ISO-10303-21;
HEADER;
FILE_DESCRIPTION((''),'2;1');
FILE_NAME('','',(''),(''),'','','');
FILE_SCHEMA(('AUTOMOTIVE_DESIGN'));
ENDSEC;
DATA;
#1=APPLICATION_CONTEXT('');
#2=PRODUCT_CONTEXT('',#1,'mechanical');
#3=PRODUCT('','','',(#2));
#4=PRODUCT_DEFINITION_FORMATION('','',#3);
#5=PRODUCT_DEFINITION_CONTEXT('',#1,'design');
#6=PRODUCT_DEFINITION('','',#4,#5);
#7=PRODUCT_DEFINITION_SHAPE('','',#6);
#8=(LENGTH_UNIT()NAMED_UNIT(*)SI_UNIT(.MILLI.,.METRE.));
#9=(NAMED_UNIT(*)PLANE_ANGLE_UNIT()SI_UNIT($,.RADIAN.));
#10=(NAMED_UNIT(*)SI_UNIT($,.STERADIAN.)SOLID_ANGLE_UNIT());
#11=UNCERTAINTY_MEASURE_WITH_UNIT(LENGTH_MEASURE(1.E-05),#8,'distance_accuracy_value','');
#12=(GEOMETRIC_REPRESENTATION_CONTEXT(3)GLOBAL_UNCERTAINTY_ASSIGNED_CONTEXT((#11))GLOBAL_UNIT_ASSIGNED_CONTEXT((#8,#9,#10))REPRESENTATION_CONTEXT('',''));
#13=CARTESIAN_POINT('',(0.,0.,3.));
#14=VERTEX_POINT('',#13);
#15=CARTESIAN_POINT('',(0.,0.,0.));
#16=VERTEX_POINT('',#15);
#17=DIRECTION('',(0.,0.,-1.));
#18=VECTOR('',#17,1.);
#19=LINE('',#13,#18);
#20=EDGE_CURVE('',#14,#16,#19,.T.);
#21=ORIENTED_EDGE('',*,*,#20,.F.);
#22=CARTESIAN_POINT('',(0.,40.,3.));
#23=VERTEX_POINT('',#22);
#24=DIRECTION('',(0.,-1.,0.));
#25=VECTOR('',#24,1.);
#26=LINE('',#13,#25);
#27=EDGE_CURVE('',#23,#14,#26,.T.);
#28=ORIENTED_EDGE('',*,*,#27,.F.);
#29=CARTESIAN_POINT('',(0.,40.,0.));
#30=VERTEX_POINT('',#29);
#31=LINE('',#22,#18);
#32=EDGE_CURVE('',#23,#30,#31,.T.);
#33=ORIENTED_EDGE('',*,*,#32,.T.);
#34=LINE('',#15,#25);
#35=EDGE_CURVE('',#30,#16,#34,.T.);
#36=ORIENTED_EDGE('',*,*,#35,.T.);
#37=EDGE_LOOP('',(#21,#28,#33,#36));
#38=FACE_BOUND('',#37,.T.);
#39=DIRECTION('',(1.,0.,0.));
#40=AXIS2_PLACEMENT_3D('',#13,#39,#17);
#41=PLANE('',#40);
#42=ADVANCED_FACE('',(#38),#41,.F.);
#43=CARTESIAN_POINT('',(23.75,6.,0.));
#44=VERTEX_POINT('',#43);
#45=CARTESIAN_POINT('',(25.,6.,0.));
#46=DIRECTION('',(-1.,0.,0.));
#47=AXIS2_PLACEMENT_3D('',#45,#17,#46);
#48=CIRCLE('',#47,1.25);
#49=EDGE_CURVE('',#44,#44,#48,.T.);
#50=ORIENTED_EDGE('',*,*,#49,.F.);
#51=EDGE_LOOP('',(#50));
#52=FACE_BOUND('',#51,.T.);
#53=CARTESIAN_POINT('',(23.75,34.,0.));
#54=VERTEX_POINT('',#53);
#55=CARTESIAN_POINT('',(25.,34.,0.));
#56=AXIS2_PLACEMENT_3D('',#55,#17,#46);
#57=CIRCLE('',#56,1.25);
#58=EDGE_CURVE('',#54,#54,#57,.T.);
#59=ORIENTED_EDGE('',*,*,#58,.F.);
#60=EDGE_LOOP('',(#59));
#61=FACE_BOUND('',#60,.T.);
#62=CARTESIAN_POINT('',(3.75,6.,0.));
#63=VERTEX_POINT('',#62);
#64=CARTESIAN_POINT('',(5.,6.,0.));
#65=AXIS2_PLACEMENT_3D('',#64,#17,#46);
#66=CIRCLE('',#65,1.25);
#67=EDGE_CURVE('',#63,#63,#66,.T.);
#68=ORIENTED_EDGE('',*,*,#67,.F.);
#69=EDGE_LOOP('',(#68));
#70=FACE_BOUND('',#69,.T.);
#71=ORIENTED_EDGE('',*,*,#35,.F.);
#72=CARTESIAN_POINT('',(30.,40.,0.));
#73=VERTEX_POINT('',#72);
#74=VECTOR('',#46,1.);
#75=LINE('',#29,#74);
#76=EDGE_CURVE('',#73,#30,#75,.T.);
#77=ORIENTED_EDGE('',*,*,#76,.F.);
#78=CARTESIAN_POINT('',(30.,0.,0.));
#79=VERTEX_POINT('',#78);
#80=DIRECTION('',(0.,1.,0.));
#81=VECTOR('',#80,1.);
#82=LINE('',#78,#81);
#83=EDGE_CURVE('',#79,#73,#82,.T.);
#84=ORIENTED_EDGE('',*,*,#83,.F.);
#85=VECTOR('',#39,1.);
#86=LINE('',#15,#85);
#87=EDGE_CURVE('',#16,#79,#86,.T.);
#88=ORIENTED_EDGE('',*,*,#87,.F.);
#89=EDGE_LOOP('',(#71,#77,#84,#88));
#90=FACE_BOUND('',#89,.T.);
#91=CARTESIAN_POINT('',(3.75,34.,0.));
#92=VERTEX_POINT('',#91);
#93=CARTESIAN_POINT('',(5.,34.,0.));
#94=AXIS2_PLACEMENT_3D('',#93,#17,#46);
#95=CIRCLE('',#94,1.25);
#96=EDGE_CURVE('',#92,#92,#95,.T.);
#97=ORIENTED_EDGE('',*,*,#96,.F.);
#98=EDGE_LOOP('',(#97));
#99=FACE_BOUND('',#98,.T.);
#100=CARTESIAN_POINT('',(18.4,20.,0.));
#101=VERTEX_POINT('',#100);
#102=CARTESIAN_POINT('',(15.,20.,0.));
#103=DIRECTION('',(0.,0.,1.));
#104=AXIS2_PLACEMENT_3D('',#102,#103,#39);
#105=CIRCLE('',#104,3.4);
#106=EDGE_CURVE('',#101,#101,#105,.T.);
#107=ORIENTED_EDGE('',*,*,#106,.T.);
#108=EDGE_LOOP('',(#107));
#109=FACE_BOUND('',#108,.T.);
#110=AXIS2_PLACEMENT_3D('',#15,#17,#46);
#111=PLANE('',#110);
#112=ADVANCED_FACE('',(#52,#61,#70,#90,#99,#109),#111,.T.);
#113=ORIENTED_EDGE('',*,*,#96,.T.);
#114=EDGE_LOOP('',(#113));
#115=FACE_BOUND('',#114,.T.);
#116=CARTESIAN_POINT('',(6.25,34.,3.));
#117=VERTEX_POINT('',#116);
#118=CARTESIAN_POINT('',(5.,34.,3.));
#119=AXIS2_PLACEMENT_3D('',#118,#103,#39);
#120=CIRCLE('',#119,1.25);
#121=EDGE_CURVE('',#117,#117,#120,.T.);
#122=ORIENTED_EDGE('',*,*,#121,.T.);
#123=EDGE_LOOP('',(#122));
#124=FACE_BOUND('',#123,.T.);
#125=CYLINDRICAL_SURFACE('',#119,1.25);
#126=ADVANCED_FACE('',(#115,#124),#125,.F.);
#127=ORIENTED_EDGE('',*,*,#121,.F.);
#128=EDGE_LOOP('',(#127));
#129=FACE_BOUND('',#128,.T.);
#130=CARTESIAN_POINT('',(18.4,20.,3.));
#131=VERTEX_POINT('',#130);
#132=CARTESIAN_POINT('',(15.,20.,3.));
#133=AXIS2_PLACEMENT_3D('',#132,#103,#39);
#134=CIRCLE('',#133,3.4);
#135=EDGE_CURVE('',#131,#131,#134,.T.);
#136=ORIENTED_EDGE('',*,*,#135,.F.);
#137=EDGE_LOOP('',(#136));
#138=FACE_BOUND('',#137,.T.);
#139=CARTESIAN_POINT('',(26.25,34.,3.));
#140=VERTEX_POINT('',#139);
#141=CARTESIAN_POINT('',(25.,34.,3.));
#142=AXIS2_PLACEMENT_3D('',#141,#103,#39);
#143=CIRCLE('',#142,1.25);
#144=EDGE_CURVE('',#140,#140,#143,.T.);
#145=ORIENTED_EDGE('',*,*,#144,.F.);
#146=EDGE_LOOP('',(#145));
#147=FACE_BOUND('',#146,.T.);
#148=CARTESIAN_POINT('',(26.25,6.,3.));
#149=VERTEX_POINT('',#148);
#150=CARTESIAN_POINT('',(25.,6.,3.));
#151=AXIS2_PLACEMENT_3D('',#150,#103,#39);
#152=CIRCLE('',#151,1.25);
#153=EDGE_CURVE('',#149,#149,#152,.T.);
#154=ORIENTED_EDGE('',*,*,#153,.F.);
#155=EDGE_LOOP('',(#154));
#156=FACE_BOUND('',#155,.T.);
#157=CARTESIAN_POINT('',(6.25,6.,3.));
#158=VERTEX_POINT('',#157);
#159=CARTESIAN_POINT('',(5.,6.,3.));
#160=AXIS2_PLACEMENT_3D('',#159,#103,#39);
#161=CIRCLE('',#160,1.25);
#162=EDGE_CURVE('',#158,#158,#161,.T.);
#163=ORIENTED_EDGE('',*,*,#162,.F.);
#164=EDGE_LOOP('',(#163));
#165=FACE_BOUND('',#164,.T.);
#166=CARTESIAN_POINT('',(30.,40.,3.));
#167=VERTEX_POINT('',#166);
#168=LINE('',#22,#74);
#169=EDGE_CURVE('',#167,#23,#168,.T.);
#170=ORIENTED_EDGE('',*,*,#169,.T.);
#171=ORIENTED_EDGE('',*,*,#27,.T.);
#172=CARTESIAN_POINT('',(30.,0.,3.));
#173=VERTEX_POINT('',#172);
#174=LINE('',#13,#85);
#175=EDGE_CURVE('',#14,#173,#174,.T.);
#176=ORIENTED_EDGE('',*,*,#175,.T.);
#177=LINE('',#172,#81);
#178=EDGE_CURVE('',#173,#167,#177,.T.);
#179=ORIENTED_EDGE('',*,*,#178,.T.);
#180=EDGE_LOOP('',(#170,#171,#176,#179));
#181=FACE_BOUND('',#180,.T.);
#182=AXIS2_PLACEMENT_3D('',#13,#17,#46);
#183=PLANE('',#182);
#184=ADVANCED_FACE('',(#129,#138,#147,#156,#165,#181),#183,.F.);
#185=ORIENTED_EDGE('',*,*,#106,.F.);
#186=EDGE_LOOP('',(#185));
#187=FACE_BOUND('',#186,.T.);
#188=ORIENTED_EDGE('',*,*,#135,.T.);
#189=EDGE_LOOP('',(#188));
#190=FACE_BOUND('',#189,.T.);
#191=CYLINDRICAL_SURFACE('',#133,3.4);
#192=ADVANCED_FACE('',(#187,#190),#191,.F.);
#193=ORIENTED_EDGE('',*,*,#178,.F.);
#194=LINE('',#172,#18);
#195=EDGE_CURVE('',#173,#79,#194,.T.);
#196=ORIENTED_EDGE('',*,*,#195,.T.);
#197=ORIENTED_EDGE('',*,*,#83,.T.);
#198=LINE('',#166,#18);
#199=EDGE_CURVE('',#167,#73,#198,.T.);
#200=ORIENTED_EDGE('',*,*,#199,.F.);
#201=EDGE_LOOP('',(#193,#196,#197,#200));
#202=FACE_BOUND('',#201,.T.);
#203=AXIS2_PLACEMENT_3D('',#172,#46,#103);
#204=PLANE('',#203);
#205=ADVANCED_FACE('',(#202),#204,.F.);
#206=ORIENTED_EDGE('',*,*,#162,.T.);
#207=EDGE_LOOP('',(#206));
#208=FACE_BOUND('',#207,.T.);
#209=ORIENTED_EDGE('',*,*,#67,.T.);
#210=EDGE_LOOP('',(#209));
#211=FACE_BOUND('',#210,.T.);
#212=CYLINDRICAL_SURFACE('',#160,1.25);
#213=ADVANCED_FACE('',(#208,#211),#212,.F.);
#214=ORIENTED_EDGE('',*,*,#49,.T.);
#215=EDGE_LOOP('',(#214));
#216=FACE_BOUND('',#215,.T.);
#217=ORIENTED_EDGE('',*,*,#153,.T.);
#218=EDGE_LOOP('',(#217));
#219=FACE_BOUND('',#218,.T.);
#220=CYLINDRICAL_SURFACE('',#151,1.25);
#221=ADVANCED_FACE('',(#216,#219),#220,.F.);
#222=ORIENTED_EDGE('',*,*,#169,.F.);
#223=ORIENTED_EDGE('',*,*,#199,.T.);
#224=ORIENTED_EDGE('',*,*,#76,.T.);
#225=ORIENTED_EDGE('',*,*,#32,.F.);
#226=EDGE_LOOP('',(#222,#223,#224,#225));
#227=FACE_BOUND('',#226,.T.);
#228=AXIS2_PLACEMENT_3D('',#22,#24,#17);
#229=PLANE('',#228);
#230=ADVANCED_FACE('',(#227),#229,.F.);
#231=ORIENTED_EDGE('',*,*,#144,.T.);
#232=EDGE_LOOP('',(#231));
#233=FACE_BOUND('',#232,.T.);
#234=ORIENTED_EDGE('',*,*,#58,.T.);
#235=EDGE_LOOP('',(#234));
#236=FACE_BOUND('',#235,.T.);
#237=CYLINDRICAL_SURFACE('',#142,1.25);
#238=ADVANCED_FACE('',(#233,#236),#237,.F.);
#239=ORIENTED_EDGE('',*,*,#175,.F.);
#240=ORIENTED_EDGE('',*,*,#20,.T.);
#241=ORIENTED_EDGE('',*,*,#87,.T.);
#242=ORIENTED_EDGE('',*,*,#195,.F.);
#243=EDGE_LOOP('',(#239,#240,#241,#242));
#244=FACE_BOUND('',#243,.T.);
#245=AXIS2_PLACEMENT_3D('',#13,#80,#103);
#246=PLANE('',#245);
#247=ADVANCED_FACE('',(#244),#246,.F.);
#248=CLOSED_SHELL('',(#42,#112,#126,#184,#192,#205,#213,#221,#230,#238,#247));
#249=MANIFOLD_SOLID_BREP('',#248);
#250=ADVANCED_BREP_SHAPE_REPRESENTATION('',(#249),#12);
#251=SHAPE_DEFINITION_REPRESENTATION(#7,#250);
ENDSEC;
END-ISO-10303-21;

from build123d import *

# Parameters (mm, degrees)
SKETCH1_W                       = 30
SKETCH1_H                       = 40
BOSS_EXTRUDE1_DEPTH             = 3
TAP_DRILL_FOR_M3_TAP1_OUTLINE_R = 1.25
TAP_DRILL_FOR_M3_TAP1_DEPTH     = 3
TAP_DRILL_FOR_M8_TAP1_D         = 6.8
TAP_DRILL_FOR_M8_TAP1_DEPTH     = 3


# Read off the part's stored shape, not the designer's step: Tap Drill for M3 Tap1
with BuildPart() as part:
    # Sketch1 → Boss-Extrude1 (new body)
    with BuildSketch(Plane.XY):
        with Locations((15, 20)):
            Rectangle(SKETCH1_W, SKETCH1_H)
    extrude(amount=BOSS_EXTRUDE1_DEPTH)

    # Tap Drill for M3 Tap1 outline → Tap Drill for M3 Tap1 (cut)
    with BuildSketch(Plane.XY):
        with Locations((25, 6)):
            Circle(TAP_DRILL_FOR_M3_TAP1_OUTLINE_R)
        with Locations((5, 34)):
            Circle(TAP_DRILL_FOR_M3_TAP1_OUTLINE_R)
        with Locations((5, 6)):
            Circle(TAP_DRILL_FOR_M3_TAP1_OUTLINE_R)
        with Locations((25, 34)):
            Circle(TAP_DRILL_FOR_M3_TAP1_OUTLINE_R)
        with Locations((15, 20)):
            Circle(TAP_DRILL_FOR_M3_TAP1_OUTLINE_R)
    extrude(amount=TAP_DRILL_FOR_M3_TAP1_DEPTH, mode=Mode.SUBTRACT)

    # Tap Drill for M8 Tap1
    with Locations(Plane.XY.offset(3)):
        with Locations((15, 20)):
            Hole(TAP_DRILL_FOR_M8_TAP1_D / 2, depth=TAP_DRILL_FOR_M8_TAP1_DEPTH)


solid = part.part
